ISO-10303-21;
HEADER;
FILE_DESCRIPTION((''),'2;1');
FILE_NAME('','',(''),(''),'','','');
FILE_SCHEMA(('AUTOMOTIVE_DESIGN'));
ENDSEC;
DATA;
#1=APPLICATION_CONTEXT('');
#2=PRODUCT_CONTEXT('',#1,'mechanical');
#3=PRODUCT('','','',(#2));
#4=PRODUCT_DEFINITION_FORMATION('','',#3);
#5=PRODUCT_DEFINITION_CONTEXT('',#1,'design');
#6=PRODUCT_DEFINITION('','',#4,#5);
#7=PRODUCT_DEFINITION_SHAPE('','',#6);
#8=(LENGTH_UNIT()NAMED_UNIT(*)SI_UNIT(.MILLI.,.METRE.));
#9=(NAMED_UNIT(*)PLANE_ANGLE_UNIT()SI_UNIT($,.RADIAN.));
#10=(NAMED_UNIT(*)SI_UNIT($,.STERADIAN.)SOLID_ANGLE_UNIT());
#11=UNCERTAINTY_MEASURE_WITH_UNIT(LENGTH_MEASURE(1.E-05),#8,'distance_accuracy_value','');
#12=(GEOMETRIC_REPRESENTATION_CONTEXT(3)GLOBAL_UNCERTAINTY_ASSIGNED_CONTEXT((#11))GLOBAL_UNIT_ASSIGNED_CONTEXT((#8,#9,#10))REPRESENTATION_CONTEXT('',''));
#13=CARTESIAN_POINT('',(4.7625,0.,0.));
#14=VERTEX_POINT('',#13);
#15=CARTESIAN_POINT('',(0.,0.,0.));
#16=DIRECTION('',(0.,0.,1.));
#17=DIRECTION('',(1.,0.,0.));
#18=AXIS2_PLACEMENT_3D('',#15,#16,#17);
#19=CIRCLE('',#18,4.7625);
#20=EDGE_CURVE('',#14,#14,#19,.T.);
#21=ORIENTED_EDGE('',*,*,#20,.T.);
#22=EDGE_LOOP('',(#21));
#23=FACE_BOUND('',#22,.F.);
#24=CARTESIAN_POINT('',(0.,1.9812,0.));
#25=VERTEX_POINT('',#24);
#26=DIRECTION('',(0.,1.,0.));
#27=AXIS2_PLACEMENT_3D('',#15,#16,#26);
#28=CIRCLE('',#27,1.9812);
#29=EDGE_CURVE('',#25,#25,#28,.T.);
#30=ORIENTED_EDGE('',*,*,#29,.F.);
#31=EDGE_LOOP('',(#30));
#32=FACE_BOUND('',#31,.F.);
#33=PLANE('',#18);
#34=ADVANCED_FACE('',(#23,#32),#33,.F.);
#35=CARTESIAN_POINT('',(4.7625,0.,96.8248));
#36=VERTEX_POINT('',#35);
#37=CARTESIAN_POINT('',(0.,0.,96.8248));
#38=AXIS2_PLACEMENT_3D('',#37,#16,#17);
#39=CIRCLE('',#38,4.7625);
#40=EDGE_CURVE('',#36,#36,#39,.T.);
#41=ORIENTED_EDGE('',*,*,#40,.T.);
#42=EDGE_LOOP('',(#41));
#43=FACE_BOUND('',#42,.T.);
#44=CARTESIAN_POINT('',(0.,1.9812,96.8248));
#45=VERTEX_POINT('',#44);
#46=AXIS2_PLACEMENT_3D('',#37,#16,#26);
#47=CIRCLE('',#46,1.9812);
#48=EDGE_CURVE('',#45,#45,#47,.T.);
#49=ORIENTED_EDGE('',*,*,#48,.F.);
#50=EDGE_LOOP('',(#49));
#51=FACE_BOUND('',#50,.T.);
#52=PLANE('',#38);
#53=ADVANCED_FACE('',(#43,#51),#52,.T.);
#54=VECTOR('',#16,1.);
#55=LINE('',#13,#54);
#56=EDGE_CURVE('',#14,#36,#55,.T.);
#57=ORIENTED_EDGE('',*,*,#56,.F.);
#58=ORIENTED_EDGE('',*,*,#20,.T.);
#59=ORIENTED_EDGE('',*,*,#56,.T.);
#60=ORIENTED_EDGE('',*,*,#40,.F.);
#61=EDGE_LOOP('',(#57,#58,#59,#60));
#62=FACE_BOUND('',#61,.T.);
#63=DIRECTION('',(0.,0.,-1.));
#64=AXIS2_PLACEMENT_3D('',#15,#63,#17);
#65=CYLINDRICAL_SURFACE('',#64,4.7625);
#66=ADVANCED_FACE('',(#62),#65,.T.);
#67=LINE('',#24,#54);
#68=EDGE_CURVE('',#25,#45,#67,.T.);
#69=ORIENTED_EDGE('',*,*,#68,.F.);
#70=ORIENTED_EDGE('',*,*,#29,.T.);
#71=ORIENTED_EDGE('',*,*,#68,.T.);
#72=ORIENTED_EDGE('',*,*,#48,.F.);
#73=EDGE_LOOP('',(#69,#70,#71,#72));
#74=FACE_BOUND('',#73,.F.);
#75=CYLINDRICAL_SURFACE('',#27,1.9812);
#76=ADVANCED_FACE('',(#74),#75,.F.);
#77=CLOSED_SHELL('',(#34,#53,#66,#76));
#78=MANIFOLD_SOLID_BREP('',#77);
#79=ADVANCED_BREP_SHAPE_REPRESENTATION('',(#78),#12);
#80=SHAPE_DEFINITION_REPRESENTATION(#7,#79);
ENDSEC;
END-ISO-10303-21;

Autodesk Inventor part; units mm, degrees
ref_plane "YZ Plane" through (0, 0, 0) normal (1, 0, 0) x (0, 1, 0)
ref_plane "XZ Plane" through (0, 0, 0) normal (0, 1, 0) x (-1, 0, 0)
ref_plane "XY Plane" through (0, 0, 0) normal (0, 0, 1) x (1, 0, 0)
sketch "Sketch1" plane through (0, 0, 0) normal (0, 0, 1) x (1, 0, 0)
  circle A0 centre (0, 0) radius 4.7625
  dimension "d10" = 9.525
extrude "Extrusion1" add sketch "Sketch1" along normal blind 96.8248
hole "Hole1" at (0, 0, 0) direction (0, 0, 1) diameter 3.9624 end through all thread size "10-32 UNF" class "2B" standard "ANSI Unified Screw Threads"
equation "\"d10\" = OutsideDiameter"
equation "\"d1\" = StandoffLength"
equation "\"StandoffLength\" = 96.8248"
equation "\"HoleDiameter\" = 5.1054"
equation "\"OutsideDiameter\" = 9.525"
properties part number "AR-003" material "Aluminum 6061"
